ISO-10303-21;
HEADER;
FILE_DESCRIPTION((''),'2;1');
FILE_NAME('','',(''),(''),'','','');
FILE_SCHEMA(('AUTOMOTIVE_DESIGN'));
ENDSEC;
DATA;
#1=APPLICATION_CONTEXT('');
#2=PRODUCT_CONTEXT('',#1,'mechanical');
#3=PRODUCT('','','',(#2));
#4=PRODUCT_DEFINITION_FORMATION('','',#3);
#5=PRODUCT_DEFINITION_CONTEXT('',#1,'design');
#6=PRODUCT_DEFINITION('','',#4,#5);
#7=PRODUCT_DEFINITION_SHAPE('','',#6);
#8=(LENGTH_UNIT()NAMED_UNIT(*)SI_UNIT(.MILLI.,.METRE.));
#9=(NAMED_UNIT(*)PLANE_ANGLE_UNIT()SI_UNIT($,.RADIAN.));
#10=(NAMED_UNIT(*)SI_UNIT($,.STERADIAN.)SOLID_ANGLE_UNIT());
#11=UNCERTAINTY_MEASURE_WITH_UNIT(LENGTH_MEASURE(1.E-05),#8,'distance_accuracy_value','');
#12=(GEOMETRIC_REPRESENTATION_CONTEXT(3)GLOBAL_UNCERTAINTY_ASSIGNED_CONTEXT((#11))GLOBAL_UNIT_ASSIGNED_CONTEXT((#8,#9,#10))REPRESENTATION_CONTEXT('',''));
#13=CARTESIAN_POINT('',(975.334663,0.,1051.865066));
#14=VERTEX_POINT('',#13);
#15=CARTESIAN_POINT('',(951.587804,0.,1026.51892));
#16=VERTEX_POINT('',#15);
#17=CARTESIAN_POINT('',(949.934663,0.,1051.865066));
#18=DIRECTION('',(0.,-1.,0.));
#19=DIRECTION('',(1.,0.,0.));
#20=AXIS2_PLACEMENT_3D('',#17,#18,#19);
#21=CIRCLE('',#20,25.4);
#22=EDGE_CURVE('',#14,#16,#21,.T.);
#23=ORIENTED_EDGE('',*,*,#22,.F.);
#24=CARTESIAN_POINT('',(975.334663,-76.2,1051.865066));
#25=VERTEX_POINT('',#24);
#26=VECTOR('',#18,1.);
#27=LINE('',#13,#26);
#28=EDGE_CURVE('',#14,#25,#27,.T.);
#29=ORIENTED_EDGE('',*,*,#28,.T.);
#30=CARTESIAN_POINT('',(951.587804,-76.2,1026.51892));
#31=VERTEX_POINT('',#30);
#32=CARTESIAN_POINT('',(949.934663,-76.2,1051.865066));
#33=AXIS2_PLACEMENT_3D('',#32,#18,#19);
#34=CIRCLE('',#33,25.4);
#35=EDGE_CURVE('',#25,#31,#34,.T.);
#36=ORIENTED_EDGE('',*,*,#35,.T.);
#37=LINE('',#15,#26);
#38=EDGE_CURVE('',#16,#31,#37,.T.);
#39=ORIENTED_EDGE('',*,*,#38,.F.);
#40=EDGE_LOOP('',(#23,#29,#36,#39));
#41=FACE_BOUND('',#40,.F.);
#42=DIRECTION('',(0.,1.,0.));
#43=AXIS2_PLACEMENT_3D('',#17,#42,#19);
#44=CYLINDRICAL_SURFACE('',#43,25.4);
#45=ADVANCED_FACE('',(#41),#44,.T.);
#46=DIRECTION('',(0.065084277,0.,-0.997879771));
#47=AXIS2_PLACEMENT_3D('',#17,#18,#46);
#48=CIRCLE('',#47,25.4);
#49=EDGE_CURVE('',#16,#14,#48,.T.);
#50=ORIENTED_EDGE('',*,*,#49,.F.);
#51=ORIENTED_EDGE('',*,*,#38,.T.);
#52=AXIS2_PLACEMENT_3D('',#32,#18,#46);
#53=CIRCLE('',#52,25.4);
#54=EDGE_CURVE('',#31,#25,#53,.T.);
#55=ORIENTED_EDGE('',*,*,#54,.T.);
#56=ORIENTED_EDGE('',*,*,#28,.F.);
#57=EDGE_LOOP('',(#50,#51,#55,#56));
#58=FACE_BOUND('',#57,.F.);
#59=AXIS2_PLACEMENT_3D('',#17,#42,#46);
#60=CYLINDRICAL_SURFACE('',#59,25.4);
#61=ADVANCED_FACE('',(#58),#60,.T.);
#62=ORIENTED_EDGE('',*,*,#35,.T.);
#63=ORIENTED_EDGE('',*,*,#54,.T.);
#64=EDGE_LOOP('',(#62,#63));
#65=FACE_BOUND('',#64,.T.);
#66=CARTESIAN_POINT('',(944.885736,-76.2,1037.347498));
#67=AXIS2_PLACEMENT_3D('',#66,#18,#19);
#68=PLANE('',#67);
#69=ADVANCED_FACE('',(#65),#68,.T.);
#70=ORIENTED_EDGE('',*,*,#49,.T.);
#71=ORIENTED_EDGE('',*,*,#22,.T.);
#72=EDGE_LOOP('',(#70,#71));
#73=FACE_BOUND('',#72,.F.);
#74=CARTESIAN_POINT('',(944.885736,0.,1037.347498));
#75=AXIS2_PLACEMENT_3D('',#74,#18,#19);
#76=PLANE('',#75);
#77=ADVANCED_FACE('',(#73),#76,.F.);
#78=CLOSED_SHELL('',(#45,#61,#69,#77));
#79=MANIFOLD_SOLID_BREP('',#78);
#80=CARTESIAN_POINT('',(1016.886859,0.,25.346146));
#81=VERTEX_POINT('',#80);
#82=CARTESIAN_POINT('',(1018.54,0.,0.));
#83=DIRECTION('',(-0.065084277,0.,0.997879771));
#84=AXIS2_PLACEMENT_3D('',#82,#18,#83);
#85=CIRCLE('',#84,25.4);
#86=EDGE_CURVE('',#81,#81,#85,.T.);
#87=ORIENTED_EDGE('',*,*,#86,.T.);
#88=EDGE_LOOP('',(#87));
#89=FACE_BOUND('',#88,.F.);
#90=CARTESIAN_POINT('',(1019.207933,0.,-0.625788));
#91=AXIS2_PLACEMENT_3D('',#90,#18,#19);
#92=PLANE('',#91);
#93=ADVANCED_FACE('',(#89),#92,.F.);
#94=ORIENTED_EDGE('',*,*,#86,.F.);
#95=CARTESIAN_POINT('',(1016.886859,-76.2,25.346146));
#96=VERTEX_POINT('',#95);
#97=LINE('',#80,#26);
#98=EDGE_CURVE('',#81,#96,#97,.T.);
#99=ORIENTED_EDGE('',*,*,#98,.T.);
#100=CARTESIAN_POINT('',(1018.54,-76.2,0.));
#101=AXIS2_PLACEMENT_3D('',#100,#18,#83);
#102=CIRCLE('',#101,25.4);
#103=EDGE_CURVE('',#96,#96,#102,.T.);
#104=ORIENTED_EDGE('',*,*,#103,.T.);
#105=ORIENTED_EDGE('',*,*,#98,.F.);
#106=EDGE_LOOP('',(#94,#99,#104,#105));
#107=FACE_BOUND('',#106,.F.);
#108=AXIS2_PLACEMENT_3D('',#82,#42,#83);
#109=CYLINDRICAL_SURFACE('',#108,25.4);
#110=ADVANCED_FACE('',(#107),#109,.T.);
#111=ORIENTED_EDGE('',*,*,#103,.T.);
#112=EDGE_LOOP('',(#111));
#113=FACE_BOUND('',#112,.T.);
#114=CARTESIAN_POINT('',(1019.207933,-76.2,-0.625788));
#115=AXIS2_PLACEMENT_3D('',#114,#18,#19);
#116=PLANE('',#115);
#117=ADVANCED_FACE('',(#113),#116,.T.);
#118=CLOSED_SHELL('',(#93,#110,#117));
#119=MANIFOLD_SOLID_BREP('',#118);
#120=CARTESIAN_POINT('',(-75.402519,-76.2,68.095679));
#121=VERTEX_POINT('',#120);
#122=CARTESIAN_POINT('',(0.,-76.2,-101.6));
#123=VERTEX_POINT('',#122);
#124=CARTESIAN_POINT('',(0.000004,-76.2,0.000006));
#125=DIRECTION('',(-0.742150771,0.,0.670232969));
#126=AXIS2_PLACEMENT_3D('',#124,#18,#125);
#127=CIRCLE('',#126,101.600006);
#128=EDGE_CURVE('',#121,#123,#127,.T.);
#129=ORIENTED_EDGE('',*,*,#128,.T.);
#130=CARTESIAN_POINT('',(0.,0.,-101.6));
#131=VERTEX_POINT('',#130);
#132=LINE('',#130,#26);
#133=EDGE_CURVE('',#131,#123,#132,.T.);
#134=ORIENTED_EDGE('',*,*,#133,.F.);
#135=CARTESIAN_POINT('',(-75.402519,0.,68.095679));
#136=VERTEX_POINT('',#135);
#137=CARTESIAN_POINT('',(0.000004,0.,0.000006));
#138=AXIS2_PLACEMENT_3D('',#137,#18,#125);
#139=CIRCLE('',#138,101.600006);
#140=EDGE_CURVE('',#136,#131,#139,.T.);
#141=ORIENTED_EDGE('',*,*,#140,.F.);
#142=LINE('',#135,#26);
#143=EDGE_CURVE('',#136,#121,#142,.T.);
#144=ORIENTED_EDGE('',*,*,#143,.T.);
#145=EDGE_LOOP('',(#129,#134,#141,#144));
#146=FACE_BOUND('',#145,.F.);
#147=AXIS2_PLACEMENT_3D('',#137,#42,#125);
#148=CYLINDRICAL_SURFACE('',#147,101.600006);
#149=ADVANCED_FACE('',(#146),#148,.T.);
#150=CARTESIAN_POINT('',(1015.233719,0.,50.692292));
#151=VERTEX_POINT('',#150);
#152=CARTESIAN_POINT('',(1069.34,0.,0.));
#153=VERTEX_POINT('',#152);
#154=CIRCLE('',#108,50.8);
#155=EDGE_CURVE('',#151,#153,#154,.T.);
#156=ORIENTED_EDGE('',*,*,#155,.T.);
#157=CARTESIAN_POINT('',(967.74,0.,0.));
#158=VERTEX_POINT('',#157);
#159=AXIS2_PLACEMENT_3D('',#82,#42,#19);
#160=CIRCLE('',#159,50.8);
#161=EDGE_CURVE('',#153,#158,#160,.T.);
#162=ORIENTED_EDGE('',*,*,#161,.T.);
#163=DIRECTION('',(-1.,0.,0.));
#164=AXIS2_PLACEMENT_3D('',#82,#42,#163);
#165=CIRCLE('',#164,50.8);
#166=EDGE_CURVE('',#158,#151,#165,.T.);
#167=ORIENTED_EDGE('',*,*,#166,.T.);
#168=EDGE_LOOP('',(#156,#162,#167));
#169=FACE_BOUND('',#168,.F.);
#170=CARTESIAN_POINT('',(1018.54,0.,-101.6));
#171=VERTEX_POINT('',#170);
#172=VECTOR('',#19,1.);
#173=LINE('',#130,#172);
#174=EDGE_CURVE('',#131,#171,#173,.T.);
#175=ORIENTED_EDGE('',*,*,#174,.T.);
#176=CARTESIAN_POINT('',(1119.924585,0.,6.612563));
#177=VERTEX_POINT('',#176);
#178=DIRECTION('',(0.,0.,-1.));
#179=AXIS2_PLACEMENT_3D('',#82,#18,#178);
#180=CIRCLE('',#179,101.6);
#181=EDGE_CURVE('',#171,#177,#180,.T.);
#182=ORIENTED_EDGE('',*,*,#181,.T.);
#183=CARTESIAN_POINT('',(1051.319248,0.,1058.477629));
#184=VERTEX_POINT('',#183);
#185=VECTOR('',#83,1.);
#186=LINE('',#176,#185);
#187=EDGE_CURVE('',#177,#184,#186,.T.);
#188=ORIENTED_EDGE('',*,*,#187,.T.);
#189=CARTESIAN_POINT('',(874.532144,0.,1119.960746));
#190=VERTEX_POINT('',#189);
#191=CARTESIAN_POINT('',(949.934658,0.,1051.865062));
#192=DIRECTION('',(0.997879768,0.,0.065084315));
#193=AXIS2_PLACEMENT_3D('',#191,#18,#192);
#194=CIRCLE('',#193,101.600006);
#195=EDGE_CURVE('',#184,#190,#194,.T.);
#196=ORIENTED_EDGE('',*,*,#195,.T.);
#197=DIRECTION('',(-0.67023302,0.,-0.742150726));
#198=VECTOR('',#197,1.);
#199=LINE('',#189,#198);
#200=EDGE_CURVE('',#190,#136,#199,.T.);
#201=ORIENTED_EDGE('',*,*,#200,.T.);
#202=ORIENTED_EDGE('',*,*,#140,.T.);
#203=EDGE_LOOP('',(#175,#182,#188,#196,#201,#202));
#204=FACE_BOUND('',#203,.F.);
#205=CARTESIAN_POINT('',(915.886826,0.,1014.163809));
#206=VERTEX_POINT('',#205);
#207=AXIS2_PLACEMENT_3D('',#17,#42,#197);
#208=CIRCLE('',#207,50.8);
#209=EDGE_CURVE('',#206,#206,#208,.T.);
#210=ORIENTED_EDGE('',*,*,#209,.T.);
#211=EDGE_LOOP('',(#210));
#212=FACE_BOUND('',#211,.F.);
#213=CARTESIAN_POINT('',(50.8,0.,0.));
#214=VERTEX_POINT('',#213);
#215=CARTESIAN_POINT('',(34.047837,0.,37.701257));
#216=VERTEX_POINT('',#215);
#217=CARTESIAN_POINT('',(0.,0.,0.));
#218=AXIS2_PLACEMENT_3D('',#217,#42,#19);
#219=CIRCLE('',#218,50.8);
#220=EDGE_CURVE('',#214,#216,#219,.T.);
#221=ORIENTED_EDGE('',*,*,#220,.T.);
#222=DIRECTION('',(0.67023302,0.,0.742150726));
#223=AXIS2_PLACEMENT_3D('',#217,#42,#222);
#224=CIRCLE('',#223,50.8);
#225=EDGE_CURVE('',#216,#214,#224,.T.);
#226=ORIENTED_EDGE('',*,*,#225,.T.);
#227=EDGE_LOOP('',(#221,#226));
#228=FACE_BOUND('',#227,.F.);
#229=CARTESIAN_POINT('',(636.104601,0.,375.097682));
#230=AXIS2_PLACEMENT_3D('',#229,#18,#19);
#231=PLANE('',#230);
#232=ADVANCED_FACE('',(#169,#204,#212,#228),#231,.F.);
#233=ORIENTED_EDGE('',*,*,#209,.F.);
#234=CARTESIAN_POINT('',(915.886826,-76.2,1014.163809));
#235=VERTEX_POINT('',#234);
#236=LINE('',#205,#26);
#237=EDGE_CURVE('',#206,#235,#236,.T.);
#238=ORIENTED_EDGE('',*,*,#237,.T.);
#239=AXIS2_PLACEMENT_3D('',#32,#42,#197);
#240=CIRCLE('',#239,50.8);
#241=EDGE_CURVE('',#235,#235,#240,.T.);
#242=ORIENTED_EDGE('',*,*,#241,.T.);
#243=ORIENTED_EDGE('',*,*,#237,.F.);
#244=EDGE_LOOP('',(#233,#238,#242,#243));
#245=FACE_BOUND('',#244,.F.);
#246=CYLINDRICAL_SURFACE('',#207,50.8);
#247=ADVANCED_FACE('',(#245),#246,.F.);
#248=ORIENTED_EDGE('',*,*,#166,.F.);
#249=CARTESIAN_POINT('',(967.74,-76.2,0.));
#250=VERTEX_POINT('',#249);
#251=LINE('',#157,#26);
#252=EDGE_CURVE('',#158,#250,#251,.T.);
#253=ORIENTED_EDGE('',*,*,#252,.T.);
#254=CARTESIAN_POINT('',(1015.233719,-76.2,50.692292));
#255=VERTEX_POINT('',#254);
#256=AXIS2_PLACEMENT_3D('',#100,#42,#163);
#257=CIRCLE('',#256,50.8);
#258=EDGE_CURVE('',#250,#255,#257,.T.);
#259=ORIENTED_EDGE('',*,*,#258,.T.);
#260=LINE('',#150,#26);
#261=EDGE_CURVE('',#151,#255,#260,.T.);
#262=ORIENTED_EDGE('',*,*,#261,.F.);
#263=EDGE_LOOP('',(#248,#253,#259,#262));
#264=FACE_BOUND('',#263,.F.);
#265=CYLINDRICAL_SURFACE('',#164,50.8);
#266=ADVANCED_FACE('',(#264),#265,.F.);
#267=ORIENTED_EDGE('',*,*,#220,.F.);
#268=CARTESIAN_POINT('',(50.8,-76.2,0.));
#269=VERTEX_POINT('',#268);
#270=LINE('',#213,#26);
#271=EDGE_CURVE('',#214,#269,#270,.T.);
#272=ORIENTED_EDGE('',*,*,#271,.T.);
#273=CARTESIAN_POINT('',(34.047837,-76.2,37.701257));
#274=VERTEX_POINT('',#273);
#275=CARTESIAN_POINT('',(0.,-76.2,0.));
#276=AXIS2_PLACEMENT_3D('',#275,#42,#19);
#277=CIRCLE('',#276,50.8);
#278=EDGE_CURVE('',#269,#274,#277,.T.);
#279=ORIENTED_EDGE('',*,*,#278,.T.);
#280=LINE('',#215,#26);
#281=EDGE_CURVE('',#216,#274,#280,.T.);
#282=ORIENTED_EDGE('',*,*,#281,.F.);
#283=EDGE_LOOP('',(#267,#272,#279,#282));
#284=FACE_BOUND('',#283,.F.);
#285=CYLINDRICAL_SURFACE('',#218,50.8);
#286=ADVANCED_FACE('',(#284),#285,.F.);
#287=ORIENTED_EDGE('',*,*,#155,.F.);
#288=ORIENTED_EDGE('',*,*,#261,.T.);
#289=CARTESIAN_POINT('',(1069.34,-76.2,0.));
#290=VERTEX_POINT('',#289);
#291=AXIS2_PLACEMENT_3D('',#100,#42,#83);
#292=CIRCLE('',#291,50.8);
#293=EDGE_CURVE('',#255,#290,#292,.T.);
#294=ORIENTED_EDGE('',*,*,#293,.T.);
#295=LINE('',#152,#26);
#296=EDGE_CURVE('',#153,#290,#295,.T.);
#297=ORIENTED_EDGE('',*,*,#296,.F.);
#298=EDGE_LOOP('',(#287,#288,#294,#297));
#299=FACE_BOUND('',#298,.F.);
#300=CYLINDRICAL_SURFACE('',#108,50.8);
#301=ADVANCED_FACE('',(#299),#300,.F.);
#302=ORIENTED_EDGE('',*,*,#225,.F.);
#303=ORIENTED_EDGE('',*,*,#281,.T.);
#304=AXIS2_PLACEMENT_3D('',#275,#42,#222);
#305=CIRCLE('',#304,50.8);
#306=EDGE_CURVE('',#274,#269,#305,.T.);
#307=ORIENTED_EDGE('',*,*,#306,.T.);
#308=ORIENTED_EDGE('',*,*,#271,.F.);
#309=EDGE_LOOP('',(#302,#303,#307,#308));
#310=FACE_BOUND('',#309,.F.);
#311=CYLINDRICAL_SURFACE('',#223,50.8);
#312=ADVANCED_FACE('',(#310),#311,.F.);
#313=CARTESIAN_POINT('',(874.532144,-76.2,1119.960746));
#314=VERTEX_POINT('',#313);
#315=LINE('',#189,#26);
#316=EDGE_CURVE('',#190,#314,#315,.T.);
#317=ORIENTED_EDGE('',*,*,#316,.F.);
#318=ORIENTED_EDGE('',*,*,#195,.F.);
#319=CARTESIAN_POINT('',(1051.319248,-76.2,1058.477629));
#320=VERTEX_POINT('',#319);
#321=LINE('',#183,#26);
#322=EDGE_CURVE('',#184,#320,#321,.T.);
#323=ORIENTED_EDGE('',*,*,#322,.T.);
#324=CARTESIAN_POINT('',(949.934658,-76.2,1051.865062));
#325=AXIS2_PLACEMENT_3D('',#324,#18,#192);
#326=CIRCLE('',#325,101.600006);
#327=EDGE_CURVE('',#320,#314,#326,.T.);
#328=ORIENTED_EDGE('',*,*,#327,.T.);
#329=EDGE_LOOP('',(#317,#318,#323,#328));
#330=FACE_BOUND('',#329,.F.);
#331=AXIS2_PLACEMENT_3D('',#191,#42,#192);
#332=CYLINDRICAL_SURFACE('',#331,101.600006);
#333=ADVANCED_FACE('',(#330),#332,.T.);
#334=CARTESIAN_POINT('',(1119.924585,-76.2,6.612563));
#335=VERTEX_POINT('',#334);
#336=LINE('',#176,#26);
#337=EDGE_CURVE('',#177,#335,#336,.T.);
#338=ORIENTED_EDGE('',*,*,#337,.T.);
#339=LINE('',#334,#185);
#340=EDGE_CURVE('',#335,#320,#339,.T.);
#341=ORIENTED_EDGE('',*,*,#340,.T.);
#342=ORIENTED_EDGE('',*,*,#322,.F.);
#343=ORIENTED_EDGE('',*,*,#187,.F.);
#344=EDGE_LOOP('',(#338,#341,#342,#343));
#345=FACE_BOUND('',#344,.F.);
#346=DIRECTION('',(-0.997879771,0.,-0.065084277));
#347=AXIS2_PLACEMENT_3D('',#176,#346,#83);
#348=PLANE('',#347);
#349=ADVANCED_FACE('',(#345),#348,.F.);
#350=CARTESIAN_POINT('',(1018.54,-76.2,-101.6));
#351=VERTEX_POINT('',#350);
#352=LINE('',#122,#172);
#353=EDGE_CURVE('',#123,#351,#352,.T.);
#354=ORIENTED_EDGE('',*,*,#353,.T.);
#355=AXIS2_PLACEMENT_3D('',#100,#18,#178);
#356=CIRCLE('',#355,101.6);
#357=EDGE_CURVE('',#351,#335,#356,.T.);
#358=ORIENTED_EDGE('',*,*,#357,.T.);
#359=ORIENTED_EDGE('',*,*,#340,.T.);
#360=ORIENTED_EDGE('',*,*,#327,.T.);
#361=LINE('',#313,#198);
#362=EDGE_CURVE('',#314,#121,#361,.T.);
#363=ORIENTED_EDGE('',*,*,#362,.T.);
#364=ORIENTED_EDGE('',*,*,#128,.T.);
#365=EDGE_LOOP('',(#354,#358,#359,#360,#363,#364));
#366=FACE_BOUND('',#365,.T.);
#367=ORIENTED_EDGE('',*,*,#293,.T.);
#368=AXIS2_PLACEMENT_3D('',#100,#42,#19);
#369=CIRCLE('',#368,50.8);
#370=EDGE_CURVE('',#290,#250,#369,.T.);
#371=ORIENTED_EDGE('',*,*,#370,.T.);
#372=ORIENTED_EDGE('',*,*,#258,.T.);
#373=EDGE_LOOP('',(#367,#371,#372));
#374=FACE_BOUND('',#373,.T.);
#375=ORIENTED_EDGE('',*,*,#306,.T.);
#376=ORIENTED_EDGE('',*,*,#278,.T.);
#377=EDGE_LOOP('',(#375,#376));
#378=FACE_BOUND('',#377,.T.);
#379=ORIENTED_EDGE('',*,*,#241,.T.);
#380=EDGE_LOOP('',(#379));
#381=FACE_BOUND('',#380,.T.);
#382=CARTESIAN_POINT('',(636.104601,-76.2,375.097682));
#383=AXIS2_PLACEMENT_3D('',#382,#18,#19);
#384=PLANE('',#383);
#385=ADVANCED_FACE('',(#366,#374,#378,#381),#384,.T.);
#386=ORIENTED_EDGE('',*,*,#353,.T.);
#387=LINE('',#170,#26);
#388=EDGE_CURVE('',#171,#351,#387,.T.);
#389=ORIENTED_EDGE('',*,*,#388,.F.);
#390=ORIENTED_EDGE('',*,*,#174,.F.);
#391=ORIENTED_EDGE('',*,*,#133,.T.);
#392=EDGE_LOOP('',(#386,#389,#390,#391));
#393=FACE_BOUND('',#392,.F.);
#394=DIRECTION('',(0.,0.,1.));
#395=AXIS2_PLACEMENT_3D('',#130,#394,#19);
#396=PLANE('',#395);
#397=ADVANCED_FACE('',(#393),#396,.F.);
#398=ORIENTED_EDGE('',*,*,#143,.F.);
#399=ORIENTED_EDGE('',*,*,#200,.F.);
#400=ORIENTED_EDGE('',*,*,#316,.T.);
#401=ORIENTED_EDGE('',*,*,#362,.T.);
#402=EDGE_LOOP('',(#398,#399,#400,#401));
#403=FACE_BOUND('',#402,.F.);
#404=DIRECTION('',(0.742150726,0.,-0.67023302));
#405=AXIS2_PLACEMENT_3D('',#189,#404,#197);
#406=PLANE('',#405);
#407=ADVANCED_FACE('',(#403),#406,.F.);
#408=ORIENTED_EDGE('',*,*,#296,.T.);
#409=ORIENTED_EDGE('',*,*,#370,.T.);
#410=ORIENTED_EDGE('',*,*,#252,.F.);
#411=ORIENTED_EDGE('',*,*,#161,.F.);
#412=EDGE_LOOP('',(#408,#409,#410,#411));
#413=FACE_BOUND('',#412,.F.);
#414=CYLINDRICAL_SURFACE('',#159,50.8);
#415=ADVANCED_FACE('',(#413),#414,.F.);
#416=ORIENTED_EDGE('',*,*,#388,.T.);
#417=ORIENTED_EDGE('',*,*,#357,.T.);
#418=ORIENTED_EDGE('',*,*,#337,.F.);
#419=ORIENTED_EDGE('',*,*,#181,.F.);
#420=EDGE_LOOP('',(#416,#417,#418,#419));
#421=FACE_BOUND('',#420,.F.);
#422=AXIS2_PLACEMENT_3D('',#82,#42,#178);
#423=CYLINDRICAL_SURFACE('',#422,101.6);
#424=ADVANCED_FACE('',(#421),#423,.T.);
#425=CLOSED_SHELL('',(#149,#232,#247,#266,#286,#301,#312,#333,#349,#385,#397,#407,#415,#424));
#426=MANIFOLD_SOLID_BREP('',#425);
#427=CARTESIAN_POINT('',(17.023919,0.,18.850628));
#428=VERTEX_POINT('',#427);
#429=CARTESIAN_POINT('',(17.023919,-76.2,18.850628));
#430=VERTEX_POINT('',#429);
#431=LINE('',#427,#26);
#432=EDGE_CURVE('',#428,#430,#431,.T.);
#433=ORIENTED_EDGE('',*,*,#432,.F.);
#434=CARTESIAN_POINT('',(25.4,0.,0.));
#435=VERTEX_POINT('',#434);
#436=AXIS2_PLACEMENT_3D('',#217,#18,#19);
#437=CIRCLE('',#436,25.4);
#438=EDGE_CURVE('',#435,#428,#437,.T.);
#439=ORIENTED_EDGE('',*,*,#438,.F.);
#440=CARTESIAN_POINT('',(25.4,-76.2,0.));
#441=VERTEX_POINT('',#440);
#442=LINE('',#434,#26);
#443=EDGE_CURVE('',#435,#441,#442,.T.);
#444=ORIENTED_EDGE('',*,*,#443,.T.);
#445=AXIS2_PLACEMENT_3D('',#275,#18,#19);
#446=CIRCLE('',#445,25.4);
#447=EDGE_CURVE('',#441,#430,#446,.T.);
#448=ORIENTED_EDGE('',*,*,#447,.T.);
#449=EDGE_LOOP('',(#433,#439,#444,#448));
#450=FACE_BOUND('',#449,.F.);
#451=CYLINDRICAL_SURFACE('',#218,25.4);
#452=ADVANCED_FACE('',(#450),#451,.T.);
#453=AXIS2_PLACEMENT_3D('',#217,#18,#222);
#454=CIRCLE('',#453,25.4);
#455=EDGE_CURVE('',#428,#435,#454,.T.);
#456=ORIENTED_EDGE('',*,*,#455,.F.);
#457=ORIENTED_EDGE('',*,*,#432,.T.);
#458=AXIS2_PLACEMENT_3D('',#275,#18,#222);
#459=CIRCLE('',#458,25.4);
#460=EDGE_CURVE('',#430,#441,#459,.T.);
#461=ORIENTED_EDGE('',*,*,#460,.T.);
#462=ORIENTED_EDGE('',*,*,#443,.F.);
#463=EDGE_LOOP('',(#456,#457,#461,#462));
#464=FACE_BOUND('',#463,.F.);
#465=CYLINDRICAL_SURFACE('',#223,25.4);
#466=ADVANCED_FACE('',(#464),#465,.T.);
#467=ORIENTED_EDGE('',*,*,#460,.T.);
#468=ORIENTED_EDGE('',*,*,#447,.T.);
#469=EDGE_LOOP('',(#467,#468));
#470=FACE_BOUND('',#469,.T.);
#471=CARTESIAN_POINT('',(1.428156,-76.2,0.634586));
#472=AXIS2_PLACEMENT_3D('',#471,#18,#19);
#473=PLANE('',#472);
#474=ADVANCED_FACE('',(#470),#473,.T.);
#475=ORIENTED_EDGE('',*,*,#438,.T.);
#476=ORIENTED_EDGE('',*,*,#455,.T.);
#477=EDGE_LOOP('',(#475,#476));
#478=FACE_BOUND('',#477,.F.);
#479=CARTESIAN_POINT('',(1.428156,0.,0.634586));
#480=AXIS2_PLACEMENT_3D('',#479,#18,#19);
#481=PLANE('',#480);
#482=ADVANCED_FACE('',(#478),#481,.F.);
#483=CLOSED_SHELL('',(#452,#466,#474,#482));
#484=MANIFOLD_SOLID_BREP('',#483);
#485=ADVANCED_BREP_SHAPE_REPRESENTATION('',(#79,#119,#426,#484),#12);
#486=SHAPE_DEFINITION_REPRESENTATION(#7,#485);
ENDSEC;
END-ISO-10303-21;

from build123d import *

# Parameters (mm, degrees)
F1_DEPTH = 76.2


# Not quite as in the source:
# - ends of sketch curves that miss each other by under 0.0002 mm in the source are joined


with BuildPart() as f1:
    # F0 (on Front) → F1 (new body)
    with BuildSketch(Plane.XZ):
        with BuildLine():
            Line((874.5321444168, 1119.9607458335), (-75.4025189249, 68.0956794957))
            ThreePointArc((-75.4025189249, 68.0956794957), (-92.8468646719, -41.2555416955), (0, -101.6))
            Line((0, -101.6), (1018.54, -101.6))
            ThreePointArc((1018.54, -101.6), (1092.6830925881, -69.4648243464), (1119.9245847073, 6.6125625695))
            Line((1119.9245847073, 6.6125625695), (1051.3192480489, 1058.4776289074))
            ThreePointArc((1051.3192480489, 1058.4776289074), (983.3084595803, 1147.8272970572), (874.5321444168, 1119.9607458335))
        make_face()
        with BuildLine():
            Line((967.74, 0), (50.8, 0))
            ThreePointArc((50.8, 0), (-46.423432336, -20.6277708478), (34.0478373958, 37.701256858))
            Line((34.0478373958, 37.701256858), (915.8868259459, 1014.1638094799))
            ThreePointArc((915.8868259459, 1014.1638094799), (929.3068924939, 1098.2884986738), (1000.7346633416, 1051.8650663379))
            ThreePointArc((1000.7346633416, 1051.8650663379), (987.0062096357, 1017.1326541647), (953.2409446264, 1001.1727739842))
            Line((953.2409446264, 1001.1727739842), (1015.2337187153, 50.6922923536))
            ThreePointArc((1015.2337187153, 50.6922923536), (1053.2724121732, 37.0715462941), (1069.34, 0))
            ThreePointArc((1069.34, 0), (1018.54, -50.8), (967.74, 0))
        make_face(mode=Mode.SUBTRACT)
        with BuildLine():
            ThreePointArc((34.0478373958, 37.701256858), (46.423432336, 20.6277708478), (50.8, 0))
            Line((50.8, 0), (967.74, 0))
            ThreePointArc((967.74, 0), (981.4684537059, 34.7324121732), (1015.2337187153, 50.6922923536))
            Line((1015.2337187153, 50.6922923536), (953.2409446264, 1001.1727739842))
            ThreePointArc((953.2409446264, 1001.1727739842), (933.2477652223, 1003.8839509782), (915.8868259459, 1014.1638094799))
            Line((915.8868259459, 1014.1638094799), (34.0478373958, 37.701256858))
        make_face()
    extrude(amount=F1_DEPTH)


with BuildPart() as f1b:
    # F0 (on Front) → F1, piece 2 (new body)
    with BuildSketch(Plane.XZ):
        with BuildLine():
            Line((25.4, 0), (0, 0))
            Line((0, 0), (17.0239186979, 18.850628429))
            ThreePointArc((17.0239186979, 18.850628429), (-23.211716168, -10.3138854239), (25.4, 0))
        make_face()
        with BuildLine():
            Line((17.0239186979, 18.850628429), (0, 0))
            Line((0, 0), (25.4, 0))
            ThreePointArc((25.4, 0), (23.211716168, 10.3138854239), (17.0239186979, 18.850628429))
        make_face()
    extrude(amount=F1_DEPTH)


with BuildPart() as f1c:
    # F0 (on Front) → F1, piece 3 (new body)
    with BuildSketch(Plane.XZ):
        with BuildLine():
            Line((1018.54, 0), (993.14, 0))
            ThreePointArc((993.14, 0), (1018.54, -25.4), (1043.94, 0))
            ThreePointArc((1043.94, 0), (1035.9062060866, 18.535773147), (1016.8868593576, 25.3461461768))
            Line((1016.8868593576, 25.3461461768), (1018.54, 0))
        make_face()
        with BuildLine():
            ThreePointArc((1016.8868593576, 25.3461461768), (1000.004226853, 17.3662060866), (993.14, 0))
            Line((993.14, 0), (1018.54, 0))
            Line((1018.54, 0), (1016.8868593576, 25.3461461768))
        make_face()
    extrude(amount=F1_DEPTH)


with BuildPart() as f1d:
    # F0 (on Front) → F1, piece 4 (new body)
    with BuildSketch(Plane.XZ):
        with BuildLine():
            Line((949.9346633416, 1051.8650663379), (932.9107446438, 1033.0144379089))
            ThreePointArc((932.9107446438, 1033.0144379089), (941.591214282, 1027.8745086581), (951.587803984, 1026.5189201611))
            Line((951.587803984, 1026.5189201611), (949.9346633416, 1051.8650663379))
        make_face()
        with BuildLine():
            ThreePointArc((975.3346633416, 1051.8650663379), (939.6207779178, 1075.0767825059), (932.9107446438, 1033.0144379089))
            Line((932.9107446438, 1033.0144379089), (949.9346633416, 1051.8650663379))
            Line((949.9346633416, 1051.8650663379), (951.587803984, 1026.5189201611))
            ThreePointArc((951.587803984, 1026.5189201611), (968.4704364887, 1034.4988602513), (975.3346633416, 1051.8650663379))
        make_face()
    extrude(amount=F1_DEPTH)


solid = Compound([f1.part, f1b.part, f1c.part, f1d.part])
